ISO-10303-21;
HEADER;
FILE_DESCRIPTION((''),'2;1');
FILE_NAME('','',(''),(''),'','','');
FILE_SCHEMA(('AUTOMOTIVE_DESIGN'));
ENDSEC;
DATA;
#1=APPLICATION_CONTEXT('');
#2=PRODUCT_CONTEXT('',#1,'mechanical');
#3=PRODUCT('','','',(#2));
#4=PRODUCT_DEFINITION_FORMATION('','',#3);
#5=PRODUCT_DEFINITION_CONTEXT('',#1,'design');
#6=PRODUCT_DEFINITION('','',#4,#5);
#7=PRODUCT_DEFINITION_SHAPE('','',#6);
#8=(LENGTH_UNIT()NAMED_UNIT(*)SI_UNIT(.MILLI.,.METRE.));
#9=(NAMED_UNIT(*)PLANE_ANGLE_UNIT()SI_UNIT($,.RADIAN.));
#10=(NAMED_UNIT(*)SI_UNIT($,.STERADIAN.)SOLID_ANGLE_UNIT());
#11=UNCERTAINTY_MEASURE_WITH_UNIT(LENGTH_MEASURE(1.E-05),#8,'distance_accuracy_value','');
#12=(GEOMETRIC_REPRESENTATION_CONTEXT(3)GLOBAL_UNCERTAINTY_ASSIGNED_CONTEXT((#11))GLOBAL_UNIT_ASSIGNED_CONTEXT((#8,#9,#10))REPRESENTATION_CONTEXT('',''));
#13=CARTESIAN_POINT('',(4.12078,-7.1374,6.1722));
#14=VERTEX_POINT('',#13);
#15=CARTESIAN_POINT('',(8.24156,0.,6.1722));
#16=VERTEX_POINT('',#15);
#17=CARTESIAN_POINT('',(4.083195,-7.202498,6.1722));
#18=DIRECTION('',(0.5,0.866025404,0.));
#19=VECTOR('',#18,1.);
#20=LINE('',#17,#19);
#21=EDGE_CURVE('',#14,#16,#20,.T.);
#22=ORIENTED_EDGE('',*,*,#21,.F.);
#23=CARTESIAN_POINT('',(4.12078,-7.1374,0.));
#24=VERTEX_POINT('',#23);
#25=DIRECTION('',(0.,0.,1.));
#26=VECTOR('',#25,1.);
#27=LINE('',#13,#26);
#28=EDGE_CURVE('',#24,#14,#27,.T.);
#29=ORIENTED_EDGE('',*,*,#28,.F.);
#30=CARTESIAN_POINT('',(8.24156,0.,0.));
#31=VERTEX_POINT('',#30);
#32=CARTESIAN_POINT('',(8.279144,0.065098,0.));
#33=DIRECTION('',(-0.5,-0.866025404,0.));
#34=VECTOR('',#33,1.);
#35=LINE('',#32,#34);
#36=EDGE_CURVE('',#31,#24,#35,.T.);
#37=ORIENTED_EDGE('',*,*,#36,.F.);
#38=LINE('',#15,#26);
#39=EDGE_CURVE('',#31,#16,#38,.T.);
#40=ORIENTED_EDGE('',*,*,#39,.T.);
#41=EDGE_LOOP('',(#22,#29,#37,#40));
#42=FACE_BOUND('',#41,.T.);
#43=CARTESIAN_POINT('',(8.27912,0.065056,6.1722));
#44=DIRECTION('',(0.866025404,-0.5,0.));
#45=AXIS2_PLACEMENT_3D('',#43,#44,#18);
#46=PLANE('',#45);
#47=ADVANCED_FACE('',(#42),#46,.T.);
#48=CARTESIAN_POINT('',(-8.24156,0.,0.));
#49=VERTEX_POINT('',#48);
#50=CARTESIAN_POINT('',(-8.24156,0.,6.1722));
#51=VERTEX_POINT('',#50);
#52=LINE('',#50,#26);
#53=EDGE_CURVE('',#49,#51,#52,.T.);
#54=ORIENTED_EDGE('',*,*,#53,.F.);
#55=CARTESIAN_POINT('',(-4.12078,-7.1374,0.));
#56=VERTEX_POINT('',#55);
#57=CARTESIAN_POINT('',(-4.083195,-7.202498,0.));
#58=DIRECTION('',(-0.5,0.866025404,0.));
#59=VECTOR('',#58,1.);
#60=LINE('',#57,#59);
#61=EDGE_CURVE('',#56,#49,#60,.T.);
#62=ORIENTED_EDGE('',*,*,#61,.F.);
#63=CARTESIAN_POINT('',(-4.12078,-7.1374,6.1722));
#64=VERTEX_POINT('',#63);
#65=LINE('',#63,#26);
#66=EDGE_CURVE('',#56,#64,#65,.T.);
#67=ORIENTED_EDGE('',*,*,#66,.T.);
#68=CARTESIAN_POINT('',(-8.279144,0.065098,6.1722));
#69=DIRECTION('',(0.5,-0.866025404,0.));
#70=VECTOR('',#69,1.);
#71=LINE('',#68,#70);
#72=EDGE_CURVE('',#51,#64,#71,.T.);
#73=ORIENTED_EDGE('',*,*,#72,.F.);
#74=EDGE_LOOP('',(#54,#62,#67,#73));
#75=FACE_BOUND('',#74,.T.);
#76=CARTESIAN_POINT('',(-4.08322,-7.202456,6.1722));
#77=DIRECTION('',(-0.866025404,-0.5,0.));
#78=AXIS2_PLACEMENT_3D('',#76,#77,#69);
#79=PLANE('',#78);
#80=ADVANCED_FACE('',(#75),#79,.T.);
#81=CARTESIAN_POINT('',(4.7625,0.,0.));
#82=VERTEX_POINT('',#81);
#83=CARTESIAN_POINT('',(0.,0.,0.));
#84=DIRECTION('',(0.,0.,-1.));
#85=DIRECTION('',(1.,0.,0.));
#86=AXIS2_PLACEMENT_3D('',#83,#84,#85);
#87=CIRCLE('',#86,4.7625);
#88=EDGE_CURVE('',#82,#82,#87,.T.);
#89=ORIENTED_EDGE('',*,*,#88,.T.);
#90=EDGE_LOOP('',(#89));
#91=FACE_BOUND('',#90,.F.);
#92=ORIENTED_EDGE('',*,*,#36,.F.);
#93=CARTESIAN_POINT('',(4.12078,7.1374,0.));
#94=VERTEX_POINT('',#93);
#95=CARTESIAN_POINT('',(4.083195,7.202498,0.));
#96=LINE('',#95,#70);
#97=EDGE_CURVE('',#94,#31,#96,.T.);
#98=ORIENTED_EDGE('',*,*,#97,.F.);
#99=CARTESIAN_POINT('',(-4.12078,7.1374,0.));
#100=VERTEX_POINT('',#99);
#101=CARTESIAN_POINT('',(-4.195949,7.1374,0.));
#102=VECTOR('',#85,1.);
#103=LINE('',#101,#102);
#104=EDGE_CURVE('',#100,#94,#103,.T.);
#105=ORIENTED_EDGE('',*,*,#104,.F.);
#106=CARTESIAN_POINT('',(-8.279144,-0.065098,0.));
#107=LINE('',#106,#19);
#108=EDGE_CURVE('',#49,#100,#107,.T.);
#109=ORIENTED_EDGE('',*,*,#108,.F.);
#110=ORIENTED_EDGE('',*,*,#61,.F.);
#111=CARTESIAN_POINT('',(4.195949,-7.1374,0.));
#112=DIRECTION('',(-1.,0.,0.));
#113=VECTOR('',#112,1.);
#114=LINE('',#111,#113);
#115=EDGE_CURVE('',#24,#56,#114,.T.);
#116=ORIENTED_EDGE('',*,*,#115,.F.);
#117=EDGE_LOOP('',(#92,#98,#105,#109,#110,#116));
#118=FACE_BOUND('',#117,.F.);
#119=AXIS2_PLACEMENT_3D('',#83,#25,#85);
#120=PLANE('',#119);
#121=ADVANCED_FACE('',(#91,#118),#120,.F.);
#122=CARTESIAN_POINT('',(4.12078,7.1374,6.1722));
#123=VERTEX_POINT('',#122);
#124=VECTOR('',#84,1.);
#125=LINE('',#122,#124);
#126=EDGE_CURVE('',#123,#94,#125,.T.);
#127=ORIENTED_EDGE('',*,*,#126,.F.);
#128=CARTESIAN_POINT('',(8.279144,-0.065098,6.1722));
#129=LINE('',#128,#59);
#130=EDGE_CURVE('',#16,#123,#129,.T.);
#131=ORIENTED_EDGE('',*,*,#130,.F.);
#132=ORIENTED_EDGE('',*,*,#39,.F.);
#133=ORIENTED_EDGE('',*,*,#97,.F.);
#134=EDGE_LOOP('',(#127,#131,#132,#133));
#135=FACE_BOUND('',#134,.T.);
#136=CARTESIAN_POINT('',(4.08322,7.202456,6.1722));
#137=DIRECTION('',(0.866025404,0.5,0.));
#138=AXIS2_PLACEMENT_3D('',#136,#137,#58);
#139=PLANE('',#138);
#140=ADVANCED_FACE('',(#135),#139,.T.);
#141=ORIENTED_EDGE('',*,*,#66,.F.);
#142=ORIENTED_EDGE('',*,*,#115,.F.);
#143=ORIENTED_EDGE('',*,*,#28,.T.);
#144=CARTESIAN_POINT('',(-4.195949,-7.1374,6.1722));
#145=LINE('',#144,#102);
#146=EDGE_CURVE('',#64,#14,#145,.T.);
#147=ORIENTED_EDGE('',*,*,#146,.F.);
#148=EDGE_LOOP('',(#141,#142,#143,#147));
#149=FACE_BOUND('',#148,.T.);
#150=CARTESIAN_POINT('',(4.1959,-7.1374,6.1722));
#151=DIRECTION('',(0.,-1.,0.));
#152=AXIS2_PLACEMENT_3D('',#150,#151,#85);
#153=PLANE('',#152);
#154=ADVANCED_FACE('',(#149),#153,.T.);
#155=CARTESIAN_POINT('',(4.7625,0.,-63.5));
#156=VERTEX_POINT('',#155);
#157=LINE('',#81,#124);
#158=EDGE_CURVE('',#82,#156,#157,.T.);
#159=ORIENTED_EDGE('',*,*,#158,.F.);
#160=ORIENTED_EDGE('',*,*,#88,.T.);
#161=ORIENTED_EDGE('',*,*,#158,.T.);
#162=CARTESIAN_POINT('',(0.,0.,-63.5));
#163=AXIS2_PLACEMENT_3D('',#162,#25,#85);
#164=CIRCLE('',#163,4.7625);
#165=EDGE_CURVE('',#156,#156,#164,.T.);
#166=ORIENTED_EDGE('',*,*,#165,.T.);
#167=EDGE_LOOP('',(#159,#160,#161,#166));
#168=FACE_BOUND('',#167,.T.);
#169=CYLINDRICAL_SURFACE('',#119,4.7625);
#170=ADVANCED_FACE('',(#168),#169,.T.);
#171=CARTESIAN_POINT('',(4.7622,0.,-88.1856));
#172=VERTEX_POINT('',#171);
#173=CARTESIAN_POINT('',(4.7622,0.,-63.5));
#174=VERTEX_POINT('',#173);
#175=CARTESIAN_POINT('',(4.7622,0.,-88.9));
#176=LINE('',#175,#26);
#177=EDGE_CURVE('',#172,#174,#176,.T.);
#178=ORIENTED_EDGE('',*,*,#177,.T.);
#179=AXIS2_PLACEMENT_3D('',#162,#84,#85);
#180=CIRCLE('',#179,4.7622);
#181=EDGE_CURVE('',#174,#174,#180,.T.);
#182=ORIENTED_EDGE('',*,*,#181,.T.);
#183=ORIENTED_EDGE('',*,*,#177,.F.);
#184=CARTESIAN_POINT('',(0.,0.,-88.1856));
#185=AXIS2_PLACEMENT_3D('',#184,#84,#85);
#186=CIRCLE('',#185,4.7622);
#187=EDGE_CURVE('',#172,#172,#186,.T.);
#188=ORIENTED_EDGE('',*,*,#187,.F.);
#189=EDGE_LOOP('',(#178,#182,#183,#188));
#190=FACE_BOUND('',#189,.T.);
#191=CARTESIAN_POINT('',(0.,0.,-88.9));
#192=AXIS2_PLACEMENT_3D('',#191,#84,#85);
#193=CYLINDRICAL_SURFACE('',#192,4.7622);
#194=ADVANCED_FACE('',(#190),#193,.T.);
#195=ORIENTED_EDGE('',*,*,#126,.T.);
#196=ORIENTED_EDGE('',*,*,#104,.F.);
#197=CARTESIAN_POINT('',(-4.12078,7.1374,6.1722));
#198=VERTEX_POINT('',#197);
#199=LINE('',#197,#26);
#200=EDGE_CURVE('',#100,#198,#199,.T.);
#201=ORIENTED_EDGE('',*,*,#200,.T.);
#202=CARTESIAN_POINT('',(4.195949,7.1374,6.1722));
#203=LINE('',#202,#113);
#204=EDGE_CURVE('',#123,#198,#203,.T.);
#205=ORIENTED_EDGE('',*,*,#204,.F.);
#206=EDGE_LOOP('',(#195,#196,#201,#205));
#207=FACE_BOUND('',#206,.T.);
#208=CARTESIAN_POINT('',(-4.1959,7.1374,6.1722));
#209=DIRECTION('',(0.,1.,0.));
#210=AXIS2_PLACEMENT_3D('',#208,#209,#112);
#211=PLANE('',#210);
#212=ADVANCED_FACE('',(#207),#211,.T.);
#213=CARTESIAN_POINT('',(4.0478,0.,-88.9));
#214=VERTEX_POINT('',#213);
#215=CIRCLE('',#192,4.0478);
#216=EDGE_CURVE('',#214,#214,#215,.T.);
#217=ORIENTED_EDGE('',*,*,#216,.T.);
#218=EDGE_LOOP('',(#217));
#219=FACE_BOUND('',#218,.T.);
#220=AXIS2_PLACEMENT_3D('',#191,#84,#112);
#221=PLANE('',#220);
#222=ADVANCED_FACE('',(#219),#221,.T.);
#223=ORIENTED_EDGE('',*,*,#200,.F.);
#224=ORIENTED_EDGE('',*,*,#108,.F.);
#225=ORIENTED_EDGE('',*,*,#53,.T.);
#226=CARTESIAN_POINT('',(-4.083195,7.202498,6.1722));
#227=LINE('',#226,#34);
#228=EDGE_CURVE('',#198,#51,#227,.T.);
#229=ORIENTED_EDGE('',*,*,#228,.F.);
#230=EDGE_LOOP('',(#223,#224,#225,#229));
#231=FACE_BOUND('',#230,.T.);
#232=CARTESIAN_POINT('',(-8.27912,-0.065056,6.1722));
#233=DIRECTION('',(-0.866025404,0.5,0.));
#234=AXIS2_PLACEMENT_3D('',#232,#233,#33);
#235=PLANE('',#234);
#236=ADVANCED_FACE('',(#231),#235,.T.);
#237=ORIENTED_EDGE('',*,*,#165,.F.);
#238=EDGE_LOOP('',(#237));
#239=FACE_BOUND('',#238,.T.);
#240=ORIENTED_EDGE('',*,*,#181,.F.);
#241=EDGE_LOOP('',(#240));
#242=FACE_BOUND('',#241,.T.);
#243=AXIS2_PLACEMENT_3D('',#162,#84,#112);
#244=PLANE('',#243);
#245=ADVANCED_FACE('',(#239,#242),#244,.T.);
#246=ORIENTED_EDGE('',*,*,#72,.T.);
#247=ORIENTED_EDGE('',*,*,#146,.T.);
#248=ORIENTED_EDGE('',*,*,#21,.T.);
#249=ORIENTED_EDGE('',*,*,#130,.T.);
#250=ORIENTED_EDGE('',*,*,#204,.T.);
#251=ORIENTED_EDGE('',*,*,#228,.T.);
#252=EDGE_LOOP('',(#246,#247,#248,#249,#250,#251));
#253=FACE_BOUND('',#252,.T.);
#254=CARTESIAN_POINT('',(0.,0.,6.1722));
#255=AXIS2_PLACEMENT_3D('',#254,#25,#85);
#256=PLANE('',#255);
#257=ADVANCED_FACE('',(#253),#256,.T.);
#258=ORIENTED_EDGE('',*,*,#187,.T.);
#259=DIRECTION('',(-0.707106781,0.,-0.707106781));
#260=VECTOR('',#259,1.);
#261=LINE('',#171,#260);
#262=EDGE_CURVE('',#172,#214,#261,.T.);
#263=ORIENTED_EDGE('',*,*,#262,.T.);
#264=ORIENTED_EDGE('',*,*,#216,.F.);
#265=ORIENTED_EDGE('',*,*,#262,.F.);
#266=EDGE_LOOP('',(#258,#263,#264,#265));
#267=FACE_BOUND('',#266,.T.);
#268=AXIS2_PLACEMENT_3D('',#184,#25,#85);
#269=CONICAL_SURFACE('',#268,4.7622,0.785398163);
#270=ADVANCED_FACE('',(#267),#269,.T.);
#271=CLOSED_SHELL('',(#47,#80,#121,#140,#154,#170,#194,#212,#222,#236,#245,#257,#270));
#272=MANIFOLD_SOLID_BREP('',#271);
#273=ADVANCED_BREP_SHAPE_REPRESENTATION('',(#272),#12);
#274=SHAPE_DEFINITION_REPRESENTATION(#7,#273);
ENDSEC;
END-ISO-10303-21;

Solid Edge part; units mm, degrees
sketch "Sketch1" plane through (0, 0, 0) normal (0, 0, 1) x (1, 0, 0)
  circle A0 centre (0, 0) radius 8.2794
  dimension "D1" = 16.5588
extrude "Protrusion1" add sketch "Sketch1" along normal blind 6.1722
sketch "Sketch2" plane through (0, 0, 0) normal (0, 0, -1) x (1, 0, 0)
  circle A0 centre (0, 0) radius 4.7625
extrude "Protrusion2" add sketch "Sketch2" along normal blind 88.9
sketch "Sketch3" plane through (0, 0, -88.9) normal (0, 0, -1) x (1, 0, 0)
  circle A0 centre (0, 0) radius 4.7622
extrude "Cutout1" cut sketch "Sketch3" against normal blind 25.4 flip side to cut
chamfer "Chamfer_1" distance 0.7144 angle 45 1 edges at (-4.7622, 0, -88.9)
sketch "Sketch4" plane through (0, 0, 6.1722) normal (0, 0, 1) x (1, 0, 0)
  line L0 (-4.1959, 7.1374) -> (4.1959, 7.1374)
  dimension "D1" = 14.2748
extrude "Cutout2" cut sketch "Sketch4" against normal up to next material side at (0, 7.1874, 6.1722)
pattern_circular "Pattern1" count 6 over 360 about axis through (0, 0, 6.1722) along (0, 0, 1) of "Cutout2"
properties part number "24106017"
